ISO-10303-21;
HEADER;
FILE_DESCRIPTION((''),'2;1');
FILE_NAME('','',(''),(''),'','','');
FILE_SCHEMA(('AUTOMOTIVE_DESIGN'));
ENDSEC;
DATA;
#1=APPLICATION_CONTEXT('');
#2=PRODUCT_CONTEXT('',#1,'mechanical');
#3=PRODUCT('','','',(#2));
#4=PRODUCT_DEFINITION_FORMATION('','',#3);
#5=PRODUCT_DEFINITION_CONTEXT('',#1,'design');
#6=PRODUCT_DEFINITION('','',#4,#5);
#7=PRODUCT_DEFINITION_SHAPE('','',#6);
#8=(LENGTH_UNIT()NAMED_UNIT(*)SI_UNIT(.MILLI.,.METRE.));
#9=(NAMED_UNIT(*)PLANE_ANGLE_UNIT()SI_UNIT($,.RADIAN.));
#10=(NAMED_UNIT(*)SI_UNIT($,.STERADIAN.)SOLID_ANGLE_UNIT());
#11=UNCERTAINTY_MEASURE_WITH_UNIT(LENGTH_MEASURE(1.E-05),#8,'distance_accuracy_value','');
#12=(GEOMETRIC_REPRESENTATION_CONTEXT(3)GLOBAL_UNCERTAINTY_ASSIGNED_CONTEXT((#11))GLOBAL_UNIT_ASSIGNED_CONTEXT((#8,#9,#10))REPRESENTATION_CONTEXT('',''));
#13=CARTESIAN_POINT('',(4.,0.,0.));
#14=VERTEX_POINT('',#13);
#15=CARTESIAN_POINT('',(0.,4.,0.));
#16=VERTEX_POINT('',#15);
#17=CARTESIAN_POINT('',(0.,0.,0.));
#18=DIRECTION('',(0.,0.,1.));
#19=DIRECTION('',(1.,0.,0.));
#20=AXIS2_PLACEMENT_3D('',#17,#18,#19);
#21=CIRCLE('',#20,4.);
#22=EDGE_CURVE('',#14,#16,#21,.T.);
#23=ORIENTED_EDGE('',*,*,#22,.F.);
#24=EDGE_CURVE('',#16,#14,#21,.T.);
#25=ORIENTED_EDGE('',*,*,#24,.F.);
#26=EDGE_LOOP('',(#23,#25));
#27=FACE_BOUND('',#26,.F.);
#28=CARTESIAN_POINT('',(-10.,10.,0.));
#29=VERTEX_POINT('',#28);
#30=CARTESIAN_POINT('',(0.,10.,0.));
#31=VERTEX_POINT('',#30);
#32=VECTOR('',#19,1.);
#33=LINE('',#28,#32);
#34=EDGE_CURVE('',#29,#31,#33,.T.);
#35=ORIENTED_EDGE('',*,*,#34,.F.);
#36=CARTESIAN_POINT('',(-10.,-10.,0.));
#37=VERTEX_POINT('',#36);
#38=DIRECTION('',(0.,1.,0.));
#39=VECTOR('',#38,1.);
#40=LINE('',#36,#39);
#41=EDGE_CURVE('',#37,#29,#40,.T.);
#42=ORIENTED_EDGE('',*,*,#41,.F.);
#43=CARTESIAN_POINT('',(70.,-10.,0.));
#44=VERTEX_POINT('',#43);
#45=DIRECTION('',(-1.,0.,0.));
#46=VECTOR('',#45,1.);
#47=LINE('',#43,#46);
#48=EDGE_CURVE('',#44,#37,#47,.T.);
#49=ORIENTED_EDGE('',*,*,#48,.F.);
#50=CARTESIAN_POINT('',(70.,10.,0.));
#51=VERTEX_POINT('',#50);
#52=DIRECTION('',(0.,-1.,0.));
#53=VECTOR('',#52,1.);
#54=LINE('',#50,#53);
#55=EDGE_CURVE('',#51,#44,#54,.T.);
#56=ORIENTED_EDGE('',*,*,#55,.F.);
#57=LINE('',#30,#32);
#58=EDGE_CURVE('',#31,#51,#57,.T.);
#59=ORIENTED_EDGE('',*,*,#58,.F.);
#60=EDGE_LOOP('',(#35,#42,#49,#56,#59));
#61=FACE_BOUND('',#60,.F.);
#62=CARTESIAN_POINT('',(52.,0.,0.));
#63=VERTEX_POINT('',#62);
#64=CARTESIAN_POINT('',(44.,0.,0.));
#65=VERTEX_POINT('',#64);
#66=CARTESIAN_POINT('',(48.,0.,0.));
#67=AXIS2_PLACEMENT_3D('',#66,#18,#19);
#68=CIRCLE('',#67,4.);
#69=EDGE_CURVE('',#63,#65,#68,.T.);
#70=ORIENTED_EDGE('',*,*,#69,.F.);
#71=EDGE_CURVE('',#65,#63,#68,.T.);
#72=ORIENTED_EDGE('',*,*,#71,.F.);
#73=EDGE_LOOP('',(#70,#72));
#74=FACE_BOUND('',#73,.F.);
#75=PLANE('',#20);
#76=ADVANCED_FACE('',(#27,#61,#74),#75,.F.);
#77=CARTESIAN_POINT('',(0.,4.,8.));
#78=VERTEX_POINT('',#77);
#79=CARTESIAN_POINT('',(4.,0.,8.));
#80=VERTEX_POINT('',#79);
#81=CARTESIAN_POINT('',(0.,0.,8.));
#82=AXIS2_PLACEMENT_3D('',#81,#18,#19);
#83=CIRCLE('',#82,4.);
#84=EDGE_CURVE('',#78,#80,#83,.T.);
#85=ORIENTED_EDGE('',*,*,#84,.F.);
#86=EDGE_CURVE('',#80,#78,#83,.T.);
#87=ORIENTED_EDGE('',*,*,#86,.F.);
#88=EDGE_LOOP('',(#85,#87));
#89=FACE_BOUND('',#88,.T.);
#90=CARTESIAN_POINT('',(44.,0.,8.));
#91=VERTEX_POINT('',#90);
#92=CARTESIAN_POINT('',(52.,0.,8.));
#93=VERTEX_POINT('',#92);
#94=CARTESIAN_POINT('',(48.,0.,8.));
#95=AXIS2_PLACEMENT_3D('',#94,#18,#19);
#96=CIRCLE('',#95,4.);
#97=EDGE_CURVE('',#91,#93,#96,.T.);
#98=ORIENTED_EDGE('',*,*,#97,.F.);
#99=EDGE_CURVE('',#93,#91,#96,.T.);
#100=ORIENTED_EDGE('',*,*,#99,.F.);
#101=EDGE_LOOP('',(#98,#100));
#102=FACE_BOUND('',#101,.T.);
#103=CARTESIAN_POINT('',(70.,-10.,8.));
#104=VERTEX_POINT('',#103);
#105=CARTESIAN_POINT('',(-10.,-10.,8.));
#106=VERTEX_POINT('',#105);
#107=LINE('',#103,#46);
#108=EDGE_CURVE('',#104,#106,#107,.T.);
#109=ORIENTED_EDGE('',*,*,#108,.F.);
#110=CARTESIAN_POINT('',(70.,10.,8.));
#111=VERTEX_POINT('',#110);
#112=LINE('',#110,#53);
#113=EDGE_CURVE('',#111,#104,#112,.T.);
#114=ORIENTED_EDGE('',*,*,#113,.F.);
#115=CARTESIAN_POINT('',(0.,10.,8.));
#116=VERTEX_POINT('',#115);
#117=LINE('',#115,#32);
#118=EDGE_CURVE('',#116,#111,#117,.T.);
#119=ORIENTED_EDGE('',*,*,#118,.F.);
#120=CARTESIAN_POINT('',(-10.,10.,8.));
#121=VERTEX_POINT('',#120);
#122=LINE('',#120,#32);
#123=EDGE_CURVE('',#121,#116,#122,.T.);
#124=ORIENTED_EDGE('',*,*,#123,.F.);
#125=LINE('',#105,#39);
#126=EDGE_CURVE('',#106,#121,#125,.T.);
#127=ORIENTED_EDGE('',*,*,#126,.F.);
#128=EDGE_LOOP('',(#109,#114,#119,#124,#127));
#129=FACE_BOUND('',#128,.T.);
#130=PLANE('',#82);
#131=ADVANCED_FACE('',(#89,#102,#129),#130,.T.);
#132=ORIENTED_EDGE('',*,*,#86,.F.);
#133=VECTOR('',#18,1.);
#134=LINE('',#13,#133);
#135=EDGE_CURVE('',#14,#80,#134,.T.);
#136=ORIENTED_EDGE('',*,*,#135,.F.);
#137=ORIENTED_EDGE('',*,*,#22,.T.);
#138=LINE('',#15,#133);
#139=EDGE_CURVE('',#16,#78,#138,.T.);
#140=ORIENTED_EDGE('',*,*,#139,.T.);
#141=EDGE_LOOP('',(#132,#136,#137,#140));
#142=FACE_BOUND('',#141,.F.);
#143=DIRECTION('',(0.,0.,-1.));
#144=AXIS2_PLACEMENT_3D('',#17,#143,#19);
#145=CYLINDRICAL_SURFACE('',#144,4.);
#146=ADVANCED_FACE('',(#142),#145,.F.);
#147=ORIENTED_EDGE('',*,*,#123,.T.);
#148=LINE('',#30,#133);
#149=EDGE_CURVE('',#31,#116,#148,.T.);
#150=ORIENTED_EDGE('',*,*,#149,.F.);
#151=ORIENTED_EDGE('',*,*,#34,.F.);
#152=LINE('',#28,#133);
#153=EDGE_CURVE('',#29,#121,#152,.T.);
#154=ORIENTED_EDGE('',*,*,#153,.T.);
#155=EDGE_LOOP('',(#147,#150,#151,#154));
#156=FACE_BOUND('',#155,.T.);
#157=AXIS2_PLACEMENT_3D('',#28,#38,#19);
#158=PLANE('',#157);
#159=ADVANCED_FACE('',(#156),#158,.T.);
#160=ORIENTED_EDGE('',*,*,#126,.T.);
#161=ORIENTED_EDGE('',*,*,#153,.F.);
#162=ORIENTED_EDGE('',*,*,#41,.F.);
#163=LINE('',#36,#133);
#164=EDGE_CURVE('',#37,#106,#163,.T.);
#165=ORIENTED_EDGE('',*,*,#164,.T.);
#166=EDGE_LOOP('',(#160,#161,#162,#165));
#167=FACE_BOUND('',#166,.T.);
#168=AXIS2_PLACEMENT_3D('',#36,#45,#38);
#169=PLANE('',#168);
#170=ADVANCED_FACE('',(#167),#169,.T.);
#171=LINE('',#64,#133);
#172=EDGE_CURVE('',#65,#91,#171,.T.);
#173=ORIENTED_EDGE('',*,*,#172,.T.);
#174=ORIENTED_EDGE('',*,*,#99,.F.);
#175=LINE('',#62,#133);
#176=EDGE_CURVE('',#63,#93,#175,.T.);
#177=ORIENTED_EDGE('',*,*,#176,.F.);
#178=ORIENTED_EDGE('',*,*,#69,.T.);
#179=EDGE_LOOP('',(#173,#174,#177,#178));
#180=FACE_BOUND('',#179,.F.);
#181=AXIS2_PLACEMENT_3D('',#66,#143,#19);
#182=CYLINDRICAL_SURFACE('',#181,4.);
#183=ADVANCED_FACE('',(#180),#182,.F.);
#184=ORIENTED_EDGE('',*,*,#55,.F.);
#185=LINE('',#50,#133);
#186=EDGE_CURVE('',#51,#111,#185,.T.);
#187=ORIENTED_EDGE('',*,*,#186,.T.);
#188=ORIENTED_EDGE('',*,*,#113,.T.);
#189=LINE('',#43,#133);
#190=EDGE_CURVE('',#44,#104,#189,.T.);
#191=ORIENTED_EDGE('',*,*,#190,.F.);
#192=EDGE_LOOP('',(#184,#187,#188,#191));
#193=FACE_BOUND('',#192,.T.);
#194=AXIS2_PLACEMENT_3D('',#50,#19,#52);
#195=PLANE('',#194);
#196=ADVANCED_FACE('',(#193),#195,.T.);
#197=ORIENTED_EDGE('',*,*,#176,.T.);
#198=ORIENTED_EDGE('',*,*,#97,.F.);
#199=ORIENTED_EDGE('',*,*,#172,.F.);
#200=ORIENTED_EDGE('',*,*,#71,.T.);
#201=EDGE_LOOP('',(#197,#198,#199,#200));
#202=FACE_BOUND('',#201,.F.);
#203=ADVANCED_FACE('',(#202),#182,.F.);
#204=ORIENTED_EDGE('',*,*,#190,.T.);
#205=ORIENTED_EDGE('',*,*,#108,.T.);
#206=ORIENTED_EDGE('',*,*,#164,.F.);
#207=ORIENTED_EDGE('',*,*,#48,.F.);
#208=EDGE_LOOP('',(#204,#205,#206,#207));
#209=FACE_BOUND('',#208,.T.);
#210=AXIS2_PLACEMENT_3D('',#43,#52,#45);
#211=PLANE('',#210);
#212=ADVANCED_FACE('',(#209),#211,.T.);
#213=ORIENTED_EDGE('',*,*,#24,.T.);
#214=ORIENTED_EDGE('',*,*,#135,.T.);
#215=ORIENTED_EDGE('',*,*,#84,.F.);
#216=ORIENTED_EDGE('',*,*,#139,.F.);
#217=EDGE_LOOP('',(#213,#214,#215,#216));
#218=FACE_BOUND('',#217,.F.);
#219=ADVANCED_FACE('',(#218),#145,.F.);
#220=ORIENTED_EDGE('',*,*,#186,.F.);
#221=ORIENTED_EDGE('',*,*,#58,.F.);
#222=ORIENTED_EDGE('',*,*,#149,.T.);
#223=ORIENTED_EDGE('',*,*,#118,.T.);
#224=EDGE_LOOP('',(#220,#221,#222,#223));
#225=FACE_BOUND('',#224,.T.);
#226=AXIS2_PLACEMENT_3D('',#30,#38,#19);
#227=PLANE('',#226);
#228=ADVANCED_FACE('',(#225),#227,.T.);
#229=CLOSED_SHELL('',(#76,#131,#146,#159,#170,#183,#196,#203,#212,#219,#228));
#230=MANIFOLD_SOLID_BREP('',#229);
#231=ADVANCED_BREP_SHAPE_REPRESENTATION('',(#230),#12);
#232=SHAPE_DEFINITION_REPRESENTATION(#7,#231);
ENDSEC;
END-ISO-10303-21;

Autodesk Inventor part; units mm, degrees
ref_plane "YZ Plane" through (0, 0, 0) normal (1, 0, 0) x (0, 1, 0)
ref_plane "XZ Plane" through (0, 0, 0) normal (0, 1, 0) x (-1, 0, 0)
ref_plane "XY Plane" through (0, 0, 0) normal (0, 0, 1) x (1, 0, 0)
sketch "Sketch1" plane through (0, 0, 0) normal (0, 0, 1) x (1, 0, 0)
  circle A0 centre (0, 0) radius 4
  line L0 (0, 0) -> (48, 0)
  circle A1 centre (48, 0) radius 4
  line L1 (0, 0) -> (0, 10)
  line L2 (0, 10) -> (70, 10)
  line L3 (70, 10) -> (70, -10)
  line L4 (70, -10) -> (-10, -10)
  line L5 (-10, -10) -> (-10, 10)
  line L6 (-10, 10) -> (0, 10)
  dimension "d0" = 8
  dimension "d1" = 48
  dimension "d2" = 8
  dimension "d3" = 10
  dimension "d4" = 70
  dimension "d5" = 20
  dimension "d6" = 80
extrude "Extrusion1" add sketch "Sketch1" along normal blind 8
properties part number "plaque 1"
